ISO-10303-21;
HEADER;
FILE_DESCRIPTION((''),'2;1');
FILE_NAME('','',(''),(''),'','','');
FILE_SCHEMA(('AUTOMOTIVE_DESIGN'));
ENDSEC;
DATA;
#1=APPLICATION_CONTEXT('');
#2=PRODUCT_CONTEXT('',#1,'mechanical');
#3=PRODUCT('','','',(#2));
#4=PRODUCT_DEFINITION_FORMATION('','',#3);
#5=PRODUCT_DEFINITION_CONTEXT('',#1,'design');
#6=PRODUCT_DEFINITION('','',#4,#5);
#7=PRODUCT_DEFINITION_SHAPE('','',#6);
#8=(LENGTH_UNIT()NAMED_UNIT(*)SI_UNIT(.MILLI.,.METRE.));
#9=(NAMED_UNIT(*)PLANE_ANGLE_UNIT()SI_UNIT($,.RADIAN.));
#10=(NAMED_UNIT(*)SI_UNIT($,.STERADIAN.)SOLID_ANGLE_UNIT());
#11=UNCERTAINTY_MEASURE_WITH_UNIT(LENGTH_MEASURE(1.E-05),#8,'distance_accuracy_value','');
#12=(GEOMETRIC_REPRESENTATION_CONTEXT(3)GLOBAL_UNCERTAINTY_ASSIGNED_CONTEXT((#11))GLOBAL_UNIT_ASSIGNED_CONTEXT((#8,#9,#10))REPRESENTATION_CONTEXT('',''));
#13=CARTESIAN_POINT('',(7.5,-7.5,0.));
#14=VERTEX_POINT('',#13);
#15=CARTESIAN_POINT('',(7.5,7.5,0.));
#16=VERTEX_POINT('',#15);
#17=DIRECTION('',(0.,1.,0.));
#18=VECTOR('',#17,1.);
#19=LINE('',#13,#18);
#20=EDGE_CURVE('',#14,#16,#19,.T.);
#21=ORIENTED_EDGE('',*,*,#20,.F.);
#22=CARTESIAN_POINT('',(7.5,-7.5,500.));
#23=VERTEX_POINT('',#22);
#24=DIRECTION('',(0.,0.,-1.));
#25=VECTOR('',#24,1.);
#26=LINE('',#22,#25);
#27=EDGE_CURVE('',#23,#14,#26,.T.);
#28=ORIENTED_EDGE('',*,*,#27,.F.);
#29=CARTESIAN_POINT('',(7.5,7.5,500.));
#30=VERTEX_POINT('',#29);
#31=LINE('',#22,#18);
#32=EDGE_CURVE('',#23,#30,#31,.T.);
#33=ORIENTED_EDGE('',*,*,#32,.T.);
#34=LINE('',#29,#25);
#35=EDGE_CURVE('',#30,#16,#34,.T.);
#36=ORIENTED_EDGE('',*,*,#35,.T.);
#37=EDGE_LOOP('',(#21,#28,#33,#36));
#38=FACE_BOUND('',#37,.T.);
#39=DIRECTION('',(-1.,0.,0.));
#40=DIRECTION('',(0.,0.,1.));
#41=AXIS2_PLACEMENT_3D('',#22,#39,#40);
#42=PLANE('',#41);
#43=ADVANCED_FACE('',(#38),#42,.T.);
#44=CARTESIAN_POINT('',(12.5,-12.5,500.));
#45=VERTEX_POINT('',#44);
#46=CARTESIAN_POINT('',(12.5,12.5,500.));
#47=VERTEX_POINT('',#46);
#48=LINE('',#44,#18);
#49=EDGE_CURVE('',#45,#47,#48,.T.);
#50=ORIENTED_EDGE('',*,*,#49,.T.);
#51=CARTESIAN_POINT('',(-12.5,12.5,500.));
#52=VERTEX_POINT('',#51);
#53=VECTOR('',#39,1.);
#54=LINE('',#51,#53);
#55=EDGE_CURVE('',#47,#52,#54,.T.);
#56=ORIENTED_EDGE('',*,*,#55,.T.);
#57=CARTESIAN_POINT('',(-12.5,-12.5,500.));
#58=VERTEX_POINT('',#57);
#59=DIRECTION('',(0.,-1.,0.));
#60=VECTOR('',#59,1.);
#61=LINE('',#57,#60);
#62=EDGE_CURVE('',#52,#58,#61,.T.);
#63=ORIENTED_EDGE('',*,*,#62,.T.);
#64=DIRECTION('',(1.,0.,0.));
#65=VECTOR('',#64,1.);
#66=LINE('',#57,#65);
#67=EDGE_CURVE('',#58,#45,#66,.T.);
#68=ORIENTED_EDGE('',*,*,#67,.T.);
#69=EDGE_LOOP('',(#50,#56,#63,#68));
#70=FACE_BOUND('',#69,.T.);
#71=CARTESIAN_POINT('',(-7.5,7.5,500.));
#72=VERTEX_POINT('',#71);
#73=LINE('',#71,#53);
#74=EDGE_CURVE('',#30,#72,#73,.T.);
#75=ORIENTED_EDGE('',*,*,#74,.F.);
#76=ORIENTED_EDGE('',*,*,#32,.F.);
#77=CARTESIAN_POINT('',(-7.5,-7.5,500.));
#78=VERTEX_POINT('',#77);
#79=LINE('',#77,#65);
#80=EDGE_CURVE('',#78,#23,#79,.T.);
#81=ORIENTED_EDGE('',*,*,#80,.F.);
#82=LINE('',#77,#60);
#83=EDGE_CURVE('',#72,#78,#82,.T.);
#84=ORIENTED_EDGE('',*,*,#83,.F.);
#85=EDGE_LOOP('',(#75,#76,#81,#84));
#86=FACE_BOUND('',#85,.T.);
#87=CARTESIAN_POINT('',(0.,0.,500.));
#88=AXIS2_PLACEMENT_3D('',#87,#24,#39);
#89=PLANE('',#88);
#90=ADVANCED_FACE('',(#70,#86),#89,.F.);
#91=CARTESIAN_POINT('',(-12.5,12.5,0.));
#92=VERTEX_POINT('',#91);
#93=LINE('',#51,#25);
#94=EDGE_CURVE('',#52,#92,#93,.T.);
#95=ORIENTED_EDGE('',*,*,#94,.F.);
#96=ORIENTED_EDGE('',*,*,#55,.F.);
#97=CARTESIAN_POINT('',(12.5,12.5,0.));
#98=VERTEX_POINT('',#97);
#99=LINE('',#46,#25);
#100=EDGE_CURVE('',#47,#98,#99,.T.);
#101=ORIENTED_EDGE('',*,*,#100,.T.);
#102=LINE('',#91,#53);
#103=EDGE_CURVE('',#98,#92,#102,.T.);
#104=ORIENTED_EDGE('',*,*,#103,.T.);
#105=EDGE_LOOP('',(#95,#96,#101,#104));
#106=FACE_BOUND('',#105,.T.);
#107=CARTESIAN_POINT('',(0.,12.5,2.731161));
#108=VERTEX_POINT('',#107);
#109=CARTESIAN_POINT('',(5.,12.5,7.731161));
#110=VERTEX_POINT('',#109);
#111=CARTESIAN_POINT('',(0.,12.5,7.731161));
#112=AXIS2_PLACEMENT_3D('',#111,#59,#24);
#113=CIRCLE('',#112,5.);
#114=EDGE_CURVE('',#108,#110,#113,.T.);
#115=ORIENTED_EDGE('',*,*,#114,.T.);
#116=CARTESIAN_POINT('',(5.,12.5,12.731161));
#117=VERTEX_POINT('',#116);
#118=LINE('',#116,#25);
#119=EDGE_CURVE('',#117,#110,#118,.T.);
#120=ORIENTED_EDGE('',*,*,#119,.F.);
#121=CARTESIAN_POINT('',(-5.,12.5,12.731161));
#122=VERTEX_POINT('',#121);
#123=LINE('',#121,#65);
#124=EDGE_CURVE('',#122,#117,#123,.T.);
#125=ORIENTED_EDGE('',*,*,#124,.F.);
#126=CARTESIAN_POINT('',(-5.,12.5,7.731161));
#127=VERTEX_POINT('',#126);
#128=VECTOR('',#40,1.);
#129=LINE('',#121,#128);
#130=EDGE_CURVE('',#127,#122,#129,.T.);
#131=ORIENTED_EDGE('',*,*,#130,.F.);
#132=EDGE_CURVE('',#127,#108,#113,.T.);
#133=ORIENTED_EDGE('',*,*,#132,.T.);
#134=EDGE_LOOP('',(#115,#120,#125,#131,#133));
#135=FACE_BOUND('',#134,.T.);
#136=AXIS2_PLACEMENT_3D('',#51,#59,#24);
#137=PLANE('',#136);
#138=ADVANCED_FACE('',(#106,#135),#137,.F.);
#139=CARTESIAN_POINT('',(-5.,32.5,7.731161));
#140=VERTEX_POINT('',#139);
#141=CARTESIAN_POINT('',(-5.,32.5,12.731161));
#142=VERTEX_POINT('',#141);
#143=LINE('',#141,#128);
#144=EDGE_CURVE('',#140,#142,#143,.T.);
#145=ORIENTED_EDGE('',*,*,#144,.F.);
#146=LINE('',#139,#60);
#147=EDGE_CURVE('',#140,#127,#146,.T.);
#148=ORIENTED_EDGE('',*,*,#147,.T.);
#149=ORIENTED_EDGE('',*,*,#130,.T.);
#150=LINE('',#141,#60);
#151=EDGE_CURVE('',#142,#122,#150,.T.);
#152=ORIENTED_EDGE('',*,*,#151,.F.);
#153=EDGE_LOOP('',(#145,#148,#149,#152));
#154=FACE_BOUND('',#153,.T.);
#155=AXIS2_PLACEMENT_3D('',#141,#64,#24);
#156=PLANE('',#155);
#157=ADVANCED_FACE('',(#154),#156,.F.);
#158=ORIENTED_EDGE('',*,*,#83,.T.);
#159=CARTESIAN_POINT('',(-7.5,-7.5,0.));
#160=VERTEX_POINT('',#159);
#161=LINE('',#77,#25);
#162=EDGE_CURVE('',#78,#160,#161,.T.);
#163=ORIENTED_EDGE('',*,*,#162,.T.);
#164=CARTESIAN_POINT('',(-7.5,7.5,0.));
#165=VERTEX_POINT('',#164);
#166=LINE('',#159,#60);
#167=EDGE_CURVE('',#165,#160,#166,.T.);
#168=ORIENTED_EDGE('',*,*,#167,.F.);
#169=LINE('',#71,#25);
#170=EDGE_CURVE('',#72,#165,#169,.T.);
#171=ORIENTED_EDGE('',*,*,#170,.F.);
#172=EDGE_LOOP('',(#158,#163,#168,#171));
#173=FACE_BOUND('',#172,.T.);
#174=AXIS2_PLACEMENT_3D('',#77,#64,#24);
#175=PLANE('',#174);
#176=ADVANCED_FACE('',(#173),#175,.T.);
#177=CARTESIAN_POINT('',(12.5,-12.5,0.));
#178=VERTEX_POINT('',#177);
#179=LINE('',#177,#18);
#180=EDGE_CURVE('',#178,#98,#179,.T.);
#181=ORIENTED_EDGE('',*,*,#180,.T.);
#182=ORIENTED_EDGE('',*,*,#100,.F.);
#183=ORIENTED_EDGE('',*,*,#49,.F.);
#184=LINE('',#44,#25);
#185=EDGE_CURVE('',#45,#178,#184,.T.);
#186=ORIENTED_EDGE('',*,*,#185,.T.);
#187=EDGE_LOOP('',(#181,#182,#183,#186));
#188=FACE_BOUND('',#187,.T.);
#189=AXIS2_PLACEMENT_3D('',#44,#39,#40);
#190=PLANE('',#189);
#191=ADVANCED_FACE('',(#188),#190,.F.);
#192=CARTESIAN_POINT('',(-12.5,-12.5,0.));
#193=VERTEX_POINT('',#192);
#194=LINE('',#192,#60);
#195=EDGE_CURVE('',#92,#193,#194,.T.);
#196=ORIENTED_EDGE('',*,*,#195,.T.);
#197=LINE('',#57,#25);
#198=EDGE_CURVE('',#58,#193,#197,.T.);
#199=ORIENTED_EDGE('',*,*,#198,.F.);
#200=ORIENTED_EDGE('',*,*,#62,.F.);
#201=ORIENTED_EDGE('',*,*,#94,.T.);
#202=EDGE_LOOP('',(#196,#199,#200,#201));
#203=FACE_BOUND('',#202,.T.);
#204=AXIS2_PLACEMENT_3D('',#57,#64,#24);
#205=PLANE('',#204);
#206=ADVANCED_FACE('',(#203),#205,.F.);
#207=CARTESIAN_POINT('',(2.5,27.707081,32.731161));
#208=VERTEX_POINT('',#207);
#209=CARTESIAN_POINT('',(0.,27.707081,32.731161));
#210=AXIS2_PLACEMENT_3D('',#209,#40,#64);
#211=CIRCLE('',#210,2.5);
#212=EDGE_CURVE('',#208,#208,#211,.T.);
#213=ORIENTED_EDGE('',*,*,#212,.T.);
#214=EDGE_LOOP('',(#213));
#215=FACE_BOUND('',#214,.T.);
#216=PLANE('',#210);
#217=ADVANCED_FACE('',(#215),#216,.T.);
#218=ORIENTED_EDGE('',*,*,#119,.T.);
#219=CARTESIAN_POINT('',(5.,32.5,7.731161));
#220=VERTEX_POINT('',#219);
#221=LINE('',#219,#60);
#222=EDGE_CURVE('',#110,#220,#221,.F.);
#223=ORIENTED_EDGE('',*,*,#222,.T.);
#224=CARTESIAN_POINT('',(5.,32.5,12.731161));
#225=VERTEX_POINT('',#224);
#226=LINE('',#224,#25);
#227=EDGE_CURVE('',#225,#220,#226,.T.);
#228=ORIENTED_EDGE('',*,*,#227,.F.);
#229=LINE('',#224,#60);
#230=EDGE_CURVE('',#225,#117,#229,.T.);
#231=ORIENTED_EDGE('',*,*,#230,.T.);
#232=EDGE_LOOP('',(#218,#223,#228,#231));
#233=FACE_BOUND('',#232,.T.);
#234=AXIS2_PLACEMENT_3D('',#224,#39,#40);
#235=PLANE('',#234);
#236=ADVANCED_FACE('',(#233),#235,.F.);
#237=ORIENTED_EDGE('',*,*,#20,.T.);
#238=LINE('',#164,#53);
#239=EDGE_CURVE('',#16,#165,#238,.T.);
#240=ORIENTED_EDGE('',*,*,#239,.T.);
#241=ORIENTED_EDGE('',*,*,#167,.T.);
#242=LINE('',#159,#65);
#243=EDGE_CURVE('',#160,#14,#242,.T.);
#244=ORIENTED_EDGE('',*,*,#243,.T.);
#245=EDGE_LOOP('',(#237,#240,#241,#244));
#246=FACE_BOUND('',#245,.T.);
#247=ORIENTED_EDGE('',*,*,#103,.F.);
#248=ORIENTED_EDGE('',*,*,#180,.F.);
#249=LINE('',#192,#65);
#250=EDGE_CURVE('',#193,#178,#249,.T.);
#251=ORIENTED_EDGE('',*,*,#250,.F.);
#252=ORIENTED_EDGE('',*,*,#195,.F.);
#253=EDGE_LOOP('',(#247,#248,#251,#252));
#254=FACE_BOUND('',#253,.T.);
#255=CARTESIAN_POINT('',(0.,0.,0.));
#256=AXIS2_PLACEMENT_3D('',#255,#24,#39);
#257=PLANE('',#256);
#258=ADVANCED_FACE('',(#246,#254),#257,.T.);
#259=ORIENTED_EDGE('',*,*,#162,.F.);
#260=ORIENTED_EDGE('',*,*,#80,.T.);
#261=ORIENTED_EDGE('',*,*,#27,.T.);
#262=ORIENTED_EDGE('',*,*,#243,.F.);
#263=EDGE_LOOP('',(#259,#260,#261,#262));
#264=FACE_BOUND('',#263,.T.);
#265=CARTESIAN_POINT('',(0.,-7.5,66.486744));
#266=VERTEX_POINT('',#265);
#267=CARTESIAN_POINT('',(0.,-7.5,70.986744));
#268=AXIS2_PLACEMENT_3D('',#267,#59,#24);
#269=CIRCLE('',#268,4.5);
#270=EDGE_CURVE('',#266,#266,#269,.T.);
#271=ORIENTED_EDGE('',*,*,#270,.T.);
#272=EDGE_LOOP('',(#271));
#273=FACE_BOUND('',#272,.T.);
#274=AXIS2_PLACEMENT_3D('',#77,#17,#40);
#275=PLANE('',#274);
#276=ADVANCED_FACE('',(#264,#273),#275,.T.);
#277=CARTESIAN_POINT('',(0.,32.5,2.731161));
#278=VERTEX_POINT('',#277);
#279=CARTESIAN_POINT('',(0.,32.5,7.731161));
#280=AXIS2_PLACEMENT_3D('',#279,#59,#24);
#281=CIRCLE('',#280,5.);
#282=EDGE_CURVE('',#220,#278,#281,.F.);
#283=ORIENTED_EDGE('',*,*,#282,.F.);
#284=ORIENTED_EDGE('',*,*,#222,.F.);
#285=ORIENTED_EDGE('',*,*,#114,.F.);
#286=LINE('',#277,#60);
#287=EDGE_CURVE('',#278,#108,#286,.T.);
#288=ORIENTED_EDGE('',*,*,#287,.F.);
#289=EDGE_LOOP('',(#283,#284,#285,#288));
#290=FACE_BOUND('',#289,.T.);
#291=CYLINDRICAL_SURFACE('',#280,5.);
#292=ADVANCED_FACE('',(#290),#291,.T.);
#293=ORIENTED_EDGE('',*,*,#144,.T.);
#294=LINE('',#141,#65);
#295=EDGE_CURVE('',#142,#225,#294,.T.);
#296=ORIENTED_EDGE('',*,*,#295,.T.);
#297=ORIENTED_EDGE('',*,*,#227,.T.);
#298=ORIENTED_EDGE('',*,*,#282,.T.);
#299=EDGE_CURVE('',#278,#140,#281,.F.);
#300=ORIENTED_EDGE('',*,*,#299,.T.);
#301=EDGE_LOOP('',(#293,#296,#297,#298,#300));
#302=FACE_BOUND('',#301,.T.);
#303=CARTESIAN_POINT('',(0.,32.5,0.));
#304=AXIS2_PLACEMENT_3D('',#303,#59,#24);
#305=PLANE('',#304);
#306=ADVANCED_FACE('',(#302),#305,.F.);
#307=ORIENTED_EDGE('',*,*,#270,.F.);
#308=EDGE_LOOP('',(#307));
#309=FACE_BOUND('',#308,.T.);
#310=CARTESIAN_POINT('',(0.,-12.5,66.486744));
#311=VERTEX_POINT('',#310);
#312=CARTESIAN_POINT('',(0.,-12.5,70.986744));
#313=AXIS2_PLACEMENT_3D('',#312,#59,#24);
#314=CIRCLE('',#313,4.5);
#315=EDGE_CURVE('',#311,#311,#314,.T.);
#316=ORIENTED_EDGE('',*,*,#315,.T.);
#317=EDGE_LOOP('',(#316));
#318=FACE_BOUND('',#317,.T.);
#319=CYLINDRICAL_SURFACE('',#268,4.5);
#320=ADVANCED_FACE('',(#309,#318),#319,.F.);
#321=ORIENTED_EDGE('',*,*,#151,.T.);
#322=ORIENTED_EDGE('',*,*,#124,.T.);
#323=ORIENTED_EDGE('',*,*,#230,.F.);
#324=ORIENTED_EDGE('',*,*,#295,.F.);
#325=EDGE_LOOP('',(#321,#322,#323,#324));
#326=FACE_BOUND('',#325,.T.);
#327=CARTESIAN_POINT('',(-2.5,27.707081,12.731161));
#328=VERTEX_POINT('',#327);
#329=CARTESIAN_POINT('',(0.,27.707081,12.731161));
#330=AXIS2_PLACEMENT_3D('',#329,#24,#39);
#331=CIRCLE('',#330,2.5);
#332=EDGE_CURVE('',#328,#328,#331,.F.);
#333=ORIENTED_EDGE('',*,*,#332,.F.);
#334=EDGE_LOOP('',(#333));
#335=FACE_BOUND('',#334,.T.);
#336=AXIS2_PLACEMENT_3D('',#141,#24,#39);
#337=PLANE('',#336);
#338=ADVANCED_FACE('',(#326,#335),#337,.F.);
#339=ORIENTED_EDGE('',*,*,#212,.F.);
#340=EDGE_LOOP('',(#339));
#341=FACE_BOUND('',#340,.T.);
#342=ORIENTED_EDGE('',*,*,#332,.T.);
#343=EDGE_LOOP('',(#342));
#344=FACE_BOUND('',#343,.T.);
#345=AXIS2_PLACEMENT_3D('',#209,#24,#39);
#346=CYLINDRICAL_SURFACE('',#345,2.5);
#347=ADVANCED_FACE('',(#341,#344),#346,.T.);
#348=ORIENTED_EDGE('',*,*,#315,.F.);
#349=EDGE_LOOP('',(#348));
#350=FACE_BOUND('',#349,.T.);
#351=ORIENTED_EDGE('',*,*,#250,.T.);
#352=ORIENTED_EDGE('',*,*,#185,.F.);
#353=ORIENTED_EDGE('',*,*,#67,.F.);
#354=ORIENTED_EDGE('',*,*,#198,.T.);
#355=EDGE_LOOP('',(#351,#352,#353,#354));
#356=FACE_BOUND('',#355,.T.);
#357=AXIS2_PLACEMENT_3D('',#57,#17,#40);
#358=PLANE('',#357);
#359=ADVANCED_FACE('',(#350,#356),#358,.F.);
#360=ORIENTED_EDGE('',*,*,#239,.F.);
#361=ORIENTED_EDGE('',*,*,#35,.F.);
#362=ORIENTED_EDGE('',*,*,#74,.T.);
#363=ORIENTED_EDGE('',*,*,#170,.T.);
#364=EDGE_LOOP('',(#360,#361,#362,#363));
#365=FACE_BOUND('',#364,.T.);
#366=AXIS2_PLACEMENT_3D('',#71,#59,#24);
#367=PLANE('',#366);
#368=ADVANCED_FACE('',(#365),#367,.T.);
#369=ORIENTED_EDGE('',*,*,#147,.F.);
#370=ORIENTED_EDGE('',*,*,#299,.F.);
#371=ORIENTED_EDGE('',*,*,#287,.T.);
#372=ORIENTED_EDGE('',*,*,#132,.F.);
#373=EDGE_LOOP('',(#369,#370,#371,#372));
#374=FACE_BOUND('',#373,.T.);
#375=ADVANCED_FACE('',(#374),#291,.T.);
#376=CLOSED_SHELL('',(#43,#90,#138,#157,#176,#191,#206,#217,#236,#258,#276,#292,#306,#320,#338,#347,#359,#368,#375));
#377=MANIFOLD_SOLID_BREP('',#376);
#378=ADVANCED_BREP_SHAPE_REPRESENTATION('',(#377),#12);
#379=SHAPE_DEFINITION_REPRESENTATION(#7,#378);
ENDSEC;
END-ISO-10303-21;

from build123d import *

# Parameters (mm, degrees)
SKETCH1_W           = 25
SKETCH1_H           = 25
SKETCH1_W_2         = 15
SKETCH1_H_2         = 15
BOSS_EXTRUDE1_DEPTH = 500
SKETCH2_W           = 10
SKETCH2_H           = 10
BOSS_EXTRUDE2_DEPTH = 20
SKETCH3_R           = 2.5
BOSS_EXTRUDE3_DEPTH = 20
FILLET2_R           = 5
FILLET3_R           = 5
SKETCH4_R           = 4.5
CUT_EXTRUDE1_DEPTH  = 5


with BuildPart() as part:
    # Sketch1 → Boss-Extrude1 (new body)
    with BuildSketch(Plane.XY):
        Rectangle(SKETCH1_W, SKETCH1_H)
        Rectangle(SKETCH1_W_2, SKETCH1_H_2, mode=Mode.SUBTRACT)
    extrude(amount=BOSS_EXTRUDE1_DEPTH)

    # Sketch2 → Boss-Extrude2 (add)
    with BuildSketch(Plane(origin=(0, 12.5, 0), x_dir=(1, 0, 0), z_dir=(0, 1, 0))):
        with Locations((0, -7.731161073)):
            Rectangle(SKETCH2_W, SKETCH2_H)
    extrude(amount=BOSS_EXTRUDE2_DEPTH)

    # Sketch3 → Boss-Extrude3 (add)
    with BuildSketch(Plane.XY.offset(12.731161073)):
        with Locations(Location((0, 27.707080849, 0), (0, 0, 180))):
            Circle(SKETCH3_R)
    extrude(amount=BOSS_EXTRUDE3_DEPTH)

    # Fillet2
    fillet2_edges = [part.edges().sort_by_distance(p)[0] for p in [
        (5, 22.5, 2.731161073),
    ]]
    fillet(fillet2_edges, radius=FILLET2_R)

    # Fillet3
    fillet3_edges = [part.edges().sort_by_distance(p)[0] for p in [
        (-5, 22.5, 2.731161073),
    ]]
    fillet(fillet3_edges, radius=FILLET3_R - 0.0001)  # a hair under: the kernel refuses the full size

    # Sketch4 → Cut-Extrude1 (cut)
    with BuildSketch(Plane.XZ.offset(12.5)):
        with Locations(Location((0, 70.986744053, 0), (0, 0, 270))):
            Circle(SKETCH4_R)
    extrude(amount=-CUT_EXTRUDE1_DEPTH, mode=Mode.SUBTRACT)


solid = part.part
